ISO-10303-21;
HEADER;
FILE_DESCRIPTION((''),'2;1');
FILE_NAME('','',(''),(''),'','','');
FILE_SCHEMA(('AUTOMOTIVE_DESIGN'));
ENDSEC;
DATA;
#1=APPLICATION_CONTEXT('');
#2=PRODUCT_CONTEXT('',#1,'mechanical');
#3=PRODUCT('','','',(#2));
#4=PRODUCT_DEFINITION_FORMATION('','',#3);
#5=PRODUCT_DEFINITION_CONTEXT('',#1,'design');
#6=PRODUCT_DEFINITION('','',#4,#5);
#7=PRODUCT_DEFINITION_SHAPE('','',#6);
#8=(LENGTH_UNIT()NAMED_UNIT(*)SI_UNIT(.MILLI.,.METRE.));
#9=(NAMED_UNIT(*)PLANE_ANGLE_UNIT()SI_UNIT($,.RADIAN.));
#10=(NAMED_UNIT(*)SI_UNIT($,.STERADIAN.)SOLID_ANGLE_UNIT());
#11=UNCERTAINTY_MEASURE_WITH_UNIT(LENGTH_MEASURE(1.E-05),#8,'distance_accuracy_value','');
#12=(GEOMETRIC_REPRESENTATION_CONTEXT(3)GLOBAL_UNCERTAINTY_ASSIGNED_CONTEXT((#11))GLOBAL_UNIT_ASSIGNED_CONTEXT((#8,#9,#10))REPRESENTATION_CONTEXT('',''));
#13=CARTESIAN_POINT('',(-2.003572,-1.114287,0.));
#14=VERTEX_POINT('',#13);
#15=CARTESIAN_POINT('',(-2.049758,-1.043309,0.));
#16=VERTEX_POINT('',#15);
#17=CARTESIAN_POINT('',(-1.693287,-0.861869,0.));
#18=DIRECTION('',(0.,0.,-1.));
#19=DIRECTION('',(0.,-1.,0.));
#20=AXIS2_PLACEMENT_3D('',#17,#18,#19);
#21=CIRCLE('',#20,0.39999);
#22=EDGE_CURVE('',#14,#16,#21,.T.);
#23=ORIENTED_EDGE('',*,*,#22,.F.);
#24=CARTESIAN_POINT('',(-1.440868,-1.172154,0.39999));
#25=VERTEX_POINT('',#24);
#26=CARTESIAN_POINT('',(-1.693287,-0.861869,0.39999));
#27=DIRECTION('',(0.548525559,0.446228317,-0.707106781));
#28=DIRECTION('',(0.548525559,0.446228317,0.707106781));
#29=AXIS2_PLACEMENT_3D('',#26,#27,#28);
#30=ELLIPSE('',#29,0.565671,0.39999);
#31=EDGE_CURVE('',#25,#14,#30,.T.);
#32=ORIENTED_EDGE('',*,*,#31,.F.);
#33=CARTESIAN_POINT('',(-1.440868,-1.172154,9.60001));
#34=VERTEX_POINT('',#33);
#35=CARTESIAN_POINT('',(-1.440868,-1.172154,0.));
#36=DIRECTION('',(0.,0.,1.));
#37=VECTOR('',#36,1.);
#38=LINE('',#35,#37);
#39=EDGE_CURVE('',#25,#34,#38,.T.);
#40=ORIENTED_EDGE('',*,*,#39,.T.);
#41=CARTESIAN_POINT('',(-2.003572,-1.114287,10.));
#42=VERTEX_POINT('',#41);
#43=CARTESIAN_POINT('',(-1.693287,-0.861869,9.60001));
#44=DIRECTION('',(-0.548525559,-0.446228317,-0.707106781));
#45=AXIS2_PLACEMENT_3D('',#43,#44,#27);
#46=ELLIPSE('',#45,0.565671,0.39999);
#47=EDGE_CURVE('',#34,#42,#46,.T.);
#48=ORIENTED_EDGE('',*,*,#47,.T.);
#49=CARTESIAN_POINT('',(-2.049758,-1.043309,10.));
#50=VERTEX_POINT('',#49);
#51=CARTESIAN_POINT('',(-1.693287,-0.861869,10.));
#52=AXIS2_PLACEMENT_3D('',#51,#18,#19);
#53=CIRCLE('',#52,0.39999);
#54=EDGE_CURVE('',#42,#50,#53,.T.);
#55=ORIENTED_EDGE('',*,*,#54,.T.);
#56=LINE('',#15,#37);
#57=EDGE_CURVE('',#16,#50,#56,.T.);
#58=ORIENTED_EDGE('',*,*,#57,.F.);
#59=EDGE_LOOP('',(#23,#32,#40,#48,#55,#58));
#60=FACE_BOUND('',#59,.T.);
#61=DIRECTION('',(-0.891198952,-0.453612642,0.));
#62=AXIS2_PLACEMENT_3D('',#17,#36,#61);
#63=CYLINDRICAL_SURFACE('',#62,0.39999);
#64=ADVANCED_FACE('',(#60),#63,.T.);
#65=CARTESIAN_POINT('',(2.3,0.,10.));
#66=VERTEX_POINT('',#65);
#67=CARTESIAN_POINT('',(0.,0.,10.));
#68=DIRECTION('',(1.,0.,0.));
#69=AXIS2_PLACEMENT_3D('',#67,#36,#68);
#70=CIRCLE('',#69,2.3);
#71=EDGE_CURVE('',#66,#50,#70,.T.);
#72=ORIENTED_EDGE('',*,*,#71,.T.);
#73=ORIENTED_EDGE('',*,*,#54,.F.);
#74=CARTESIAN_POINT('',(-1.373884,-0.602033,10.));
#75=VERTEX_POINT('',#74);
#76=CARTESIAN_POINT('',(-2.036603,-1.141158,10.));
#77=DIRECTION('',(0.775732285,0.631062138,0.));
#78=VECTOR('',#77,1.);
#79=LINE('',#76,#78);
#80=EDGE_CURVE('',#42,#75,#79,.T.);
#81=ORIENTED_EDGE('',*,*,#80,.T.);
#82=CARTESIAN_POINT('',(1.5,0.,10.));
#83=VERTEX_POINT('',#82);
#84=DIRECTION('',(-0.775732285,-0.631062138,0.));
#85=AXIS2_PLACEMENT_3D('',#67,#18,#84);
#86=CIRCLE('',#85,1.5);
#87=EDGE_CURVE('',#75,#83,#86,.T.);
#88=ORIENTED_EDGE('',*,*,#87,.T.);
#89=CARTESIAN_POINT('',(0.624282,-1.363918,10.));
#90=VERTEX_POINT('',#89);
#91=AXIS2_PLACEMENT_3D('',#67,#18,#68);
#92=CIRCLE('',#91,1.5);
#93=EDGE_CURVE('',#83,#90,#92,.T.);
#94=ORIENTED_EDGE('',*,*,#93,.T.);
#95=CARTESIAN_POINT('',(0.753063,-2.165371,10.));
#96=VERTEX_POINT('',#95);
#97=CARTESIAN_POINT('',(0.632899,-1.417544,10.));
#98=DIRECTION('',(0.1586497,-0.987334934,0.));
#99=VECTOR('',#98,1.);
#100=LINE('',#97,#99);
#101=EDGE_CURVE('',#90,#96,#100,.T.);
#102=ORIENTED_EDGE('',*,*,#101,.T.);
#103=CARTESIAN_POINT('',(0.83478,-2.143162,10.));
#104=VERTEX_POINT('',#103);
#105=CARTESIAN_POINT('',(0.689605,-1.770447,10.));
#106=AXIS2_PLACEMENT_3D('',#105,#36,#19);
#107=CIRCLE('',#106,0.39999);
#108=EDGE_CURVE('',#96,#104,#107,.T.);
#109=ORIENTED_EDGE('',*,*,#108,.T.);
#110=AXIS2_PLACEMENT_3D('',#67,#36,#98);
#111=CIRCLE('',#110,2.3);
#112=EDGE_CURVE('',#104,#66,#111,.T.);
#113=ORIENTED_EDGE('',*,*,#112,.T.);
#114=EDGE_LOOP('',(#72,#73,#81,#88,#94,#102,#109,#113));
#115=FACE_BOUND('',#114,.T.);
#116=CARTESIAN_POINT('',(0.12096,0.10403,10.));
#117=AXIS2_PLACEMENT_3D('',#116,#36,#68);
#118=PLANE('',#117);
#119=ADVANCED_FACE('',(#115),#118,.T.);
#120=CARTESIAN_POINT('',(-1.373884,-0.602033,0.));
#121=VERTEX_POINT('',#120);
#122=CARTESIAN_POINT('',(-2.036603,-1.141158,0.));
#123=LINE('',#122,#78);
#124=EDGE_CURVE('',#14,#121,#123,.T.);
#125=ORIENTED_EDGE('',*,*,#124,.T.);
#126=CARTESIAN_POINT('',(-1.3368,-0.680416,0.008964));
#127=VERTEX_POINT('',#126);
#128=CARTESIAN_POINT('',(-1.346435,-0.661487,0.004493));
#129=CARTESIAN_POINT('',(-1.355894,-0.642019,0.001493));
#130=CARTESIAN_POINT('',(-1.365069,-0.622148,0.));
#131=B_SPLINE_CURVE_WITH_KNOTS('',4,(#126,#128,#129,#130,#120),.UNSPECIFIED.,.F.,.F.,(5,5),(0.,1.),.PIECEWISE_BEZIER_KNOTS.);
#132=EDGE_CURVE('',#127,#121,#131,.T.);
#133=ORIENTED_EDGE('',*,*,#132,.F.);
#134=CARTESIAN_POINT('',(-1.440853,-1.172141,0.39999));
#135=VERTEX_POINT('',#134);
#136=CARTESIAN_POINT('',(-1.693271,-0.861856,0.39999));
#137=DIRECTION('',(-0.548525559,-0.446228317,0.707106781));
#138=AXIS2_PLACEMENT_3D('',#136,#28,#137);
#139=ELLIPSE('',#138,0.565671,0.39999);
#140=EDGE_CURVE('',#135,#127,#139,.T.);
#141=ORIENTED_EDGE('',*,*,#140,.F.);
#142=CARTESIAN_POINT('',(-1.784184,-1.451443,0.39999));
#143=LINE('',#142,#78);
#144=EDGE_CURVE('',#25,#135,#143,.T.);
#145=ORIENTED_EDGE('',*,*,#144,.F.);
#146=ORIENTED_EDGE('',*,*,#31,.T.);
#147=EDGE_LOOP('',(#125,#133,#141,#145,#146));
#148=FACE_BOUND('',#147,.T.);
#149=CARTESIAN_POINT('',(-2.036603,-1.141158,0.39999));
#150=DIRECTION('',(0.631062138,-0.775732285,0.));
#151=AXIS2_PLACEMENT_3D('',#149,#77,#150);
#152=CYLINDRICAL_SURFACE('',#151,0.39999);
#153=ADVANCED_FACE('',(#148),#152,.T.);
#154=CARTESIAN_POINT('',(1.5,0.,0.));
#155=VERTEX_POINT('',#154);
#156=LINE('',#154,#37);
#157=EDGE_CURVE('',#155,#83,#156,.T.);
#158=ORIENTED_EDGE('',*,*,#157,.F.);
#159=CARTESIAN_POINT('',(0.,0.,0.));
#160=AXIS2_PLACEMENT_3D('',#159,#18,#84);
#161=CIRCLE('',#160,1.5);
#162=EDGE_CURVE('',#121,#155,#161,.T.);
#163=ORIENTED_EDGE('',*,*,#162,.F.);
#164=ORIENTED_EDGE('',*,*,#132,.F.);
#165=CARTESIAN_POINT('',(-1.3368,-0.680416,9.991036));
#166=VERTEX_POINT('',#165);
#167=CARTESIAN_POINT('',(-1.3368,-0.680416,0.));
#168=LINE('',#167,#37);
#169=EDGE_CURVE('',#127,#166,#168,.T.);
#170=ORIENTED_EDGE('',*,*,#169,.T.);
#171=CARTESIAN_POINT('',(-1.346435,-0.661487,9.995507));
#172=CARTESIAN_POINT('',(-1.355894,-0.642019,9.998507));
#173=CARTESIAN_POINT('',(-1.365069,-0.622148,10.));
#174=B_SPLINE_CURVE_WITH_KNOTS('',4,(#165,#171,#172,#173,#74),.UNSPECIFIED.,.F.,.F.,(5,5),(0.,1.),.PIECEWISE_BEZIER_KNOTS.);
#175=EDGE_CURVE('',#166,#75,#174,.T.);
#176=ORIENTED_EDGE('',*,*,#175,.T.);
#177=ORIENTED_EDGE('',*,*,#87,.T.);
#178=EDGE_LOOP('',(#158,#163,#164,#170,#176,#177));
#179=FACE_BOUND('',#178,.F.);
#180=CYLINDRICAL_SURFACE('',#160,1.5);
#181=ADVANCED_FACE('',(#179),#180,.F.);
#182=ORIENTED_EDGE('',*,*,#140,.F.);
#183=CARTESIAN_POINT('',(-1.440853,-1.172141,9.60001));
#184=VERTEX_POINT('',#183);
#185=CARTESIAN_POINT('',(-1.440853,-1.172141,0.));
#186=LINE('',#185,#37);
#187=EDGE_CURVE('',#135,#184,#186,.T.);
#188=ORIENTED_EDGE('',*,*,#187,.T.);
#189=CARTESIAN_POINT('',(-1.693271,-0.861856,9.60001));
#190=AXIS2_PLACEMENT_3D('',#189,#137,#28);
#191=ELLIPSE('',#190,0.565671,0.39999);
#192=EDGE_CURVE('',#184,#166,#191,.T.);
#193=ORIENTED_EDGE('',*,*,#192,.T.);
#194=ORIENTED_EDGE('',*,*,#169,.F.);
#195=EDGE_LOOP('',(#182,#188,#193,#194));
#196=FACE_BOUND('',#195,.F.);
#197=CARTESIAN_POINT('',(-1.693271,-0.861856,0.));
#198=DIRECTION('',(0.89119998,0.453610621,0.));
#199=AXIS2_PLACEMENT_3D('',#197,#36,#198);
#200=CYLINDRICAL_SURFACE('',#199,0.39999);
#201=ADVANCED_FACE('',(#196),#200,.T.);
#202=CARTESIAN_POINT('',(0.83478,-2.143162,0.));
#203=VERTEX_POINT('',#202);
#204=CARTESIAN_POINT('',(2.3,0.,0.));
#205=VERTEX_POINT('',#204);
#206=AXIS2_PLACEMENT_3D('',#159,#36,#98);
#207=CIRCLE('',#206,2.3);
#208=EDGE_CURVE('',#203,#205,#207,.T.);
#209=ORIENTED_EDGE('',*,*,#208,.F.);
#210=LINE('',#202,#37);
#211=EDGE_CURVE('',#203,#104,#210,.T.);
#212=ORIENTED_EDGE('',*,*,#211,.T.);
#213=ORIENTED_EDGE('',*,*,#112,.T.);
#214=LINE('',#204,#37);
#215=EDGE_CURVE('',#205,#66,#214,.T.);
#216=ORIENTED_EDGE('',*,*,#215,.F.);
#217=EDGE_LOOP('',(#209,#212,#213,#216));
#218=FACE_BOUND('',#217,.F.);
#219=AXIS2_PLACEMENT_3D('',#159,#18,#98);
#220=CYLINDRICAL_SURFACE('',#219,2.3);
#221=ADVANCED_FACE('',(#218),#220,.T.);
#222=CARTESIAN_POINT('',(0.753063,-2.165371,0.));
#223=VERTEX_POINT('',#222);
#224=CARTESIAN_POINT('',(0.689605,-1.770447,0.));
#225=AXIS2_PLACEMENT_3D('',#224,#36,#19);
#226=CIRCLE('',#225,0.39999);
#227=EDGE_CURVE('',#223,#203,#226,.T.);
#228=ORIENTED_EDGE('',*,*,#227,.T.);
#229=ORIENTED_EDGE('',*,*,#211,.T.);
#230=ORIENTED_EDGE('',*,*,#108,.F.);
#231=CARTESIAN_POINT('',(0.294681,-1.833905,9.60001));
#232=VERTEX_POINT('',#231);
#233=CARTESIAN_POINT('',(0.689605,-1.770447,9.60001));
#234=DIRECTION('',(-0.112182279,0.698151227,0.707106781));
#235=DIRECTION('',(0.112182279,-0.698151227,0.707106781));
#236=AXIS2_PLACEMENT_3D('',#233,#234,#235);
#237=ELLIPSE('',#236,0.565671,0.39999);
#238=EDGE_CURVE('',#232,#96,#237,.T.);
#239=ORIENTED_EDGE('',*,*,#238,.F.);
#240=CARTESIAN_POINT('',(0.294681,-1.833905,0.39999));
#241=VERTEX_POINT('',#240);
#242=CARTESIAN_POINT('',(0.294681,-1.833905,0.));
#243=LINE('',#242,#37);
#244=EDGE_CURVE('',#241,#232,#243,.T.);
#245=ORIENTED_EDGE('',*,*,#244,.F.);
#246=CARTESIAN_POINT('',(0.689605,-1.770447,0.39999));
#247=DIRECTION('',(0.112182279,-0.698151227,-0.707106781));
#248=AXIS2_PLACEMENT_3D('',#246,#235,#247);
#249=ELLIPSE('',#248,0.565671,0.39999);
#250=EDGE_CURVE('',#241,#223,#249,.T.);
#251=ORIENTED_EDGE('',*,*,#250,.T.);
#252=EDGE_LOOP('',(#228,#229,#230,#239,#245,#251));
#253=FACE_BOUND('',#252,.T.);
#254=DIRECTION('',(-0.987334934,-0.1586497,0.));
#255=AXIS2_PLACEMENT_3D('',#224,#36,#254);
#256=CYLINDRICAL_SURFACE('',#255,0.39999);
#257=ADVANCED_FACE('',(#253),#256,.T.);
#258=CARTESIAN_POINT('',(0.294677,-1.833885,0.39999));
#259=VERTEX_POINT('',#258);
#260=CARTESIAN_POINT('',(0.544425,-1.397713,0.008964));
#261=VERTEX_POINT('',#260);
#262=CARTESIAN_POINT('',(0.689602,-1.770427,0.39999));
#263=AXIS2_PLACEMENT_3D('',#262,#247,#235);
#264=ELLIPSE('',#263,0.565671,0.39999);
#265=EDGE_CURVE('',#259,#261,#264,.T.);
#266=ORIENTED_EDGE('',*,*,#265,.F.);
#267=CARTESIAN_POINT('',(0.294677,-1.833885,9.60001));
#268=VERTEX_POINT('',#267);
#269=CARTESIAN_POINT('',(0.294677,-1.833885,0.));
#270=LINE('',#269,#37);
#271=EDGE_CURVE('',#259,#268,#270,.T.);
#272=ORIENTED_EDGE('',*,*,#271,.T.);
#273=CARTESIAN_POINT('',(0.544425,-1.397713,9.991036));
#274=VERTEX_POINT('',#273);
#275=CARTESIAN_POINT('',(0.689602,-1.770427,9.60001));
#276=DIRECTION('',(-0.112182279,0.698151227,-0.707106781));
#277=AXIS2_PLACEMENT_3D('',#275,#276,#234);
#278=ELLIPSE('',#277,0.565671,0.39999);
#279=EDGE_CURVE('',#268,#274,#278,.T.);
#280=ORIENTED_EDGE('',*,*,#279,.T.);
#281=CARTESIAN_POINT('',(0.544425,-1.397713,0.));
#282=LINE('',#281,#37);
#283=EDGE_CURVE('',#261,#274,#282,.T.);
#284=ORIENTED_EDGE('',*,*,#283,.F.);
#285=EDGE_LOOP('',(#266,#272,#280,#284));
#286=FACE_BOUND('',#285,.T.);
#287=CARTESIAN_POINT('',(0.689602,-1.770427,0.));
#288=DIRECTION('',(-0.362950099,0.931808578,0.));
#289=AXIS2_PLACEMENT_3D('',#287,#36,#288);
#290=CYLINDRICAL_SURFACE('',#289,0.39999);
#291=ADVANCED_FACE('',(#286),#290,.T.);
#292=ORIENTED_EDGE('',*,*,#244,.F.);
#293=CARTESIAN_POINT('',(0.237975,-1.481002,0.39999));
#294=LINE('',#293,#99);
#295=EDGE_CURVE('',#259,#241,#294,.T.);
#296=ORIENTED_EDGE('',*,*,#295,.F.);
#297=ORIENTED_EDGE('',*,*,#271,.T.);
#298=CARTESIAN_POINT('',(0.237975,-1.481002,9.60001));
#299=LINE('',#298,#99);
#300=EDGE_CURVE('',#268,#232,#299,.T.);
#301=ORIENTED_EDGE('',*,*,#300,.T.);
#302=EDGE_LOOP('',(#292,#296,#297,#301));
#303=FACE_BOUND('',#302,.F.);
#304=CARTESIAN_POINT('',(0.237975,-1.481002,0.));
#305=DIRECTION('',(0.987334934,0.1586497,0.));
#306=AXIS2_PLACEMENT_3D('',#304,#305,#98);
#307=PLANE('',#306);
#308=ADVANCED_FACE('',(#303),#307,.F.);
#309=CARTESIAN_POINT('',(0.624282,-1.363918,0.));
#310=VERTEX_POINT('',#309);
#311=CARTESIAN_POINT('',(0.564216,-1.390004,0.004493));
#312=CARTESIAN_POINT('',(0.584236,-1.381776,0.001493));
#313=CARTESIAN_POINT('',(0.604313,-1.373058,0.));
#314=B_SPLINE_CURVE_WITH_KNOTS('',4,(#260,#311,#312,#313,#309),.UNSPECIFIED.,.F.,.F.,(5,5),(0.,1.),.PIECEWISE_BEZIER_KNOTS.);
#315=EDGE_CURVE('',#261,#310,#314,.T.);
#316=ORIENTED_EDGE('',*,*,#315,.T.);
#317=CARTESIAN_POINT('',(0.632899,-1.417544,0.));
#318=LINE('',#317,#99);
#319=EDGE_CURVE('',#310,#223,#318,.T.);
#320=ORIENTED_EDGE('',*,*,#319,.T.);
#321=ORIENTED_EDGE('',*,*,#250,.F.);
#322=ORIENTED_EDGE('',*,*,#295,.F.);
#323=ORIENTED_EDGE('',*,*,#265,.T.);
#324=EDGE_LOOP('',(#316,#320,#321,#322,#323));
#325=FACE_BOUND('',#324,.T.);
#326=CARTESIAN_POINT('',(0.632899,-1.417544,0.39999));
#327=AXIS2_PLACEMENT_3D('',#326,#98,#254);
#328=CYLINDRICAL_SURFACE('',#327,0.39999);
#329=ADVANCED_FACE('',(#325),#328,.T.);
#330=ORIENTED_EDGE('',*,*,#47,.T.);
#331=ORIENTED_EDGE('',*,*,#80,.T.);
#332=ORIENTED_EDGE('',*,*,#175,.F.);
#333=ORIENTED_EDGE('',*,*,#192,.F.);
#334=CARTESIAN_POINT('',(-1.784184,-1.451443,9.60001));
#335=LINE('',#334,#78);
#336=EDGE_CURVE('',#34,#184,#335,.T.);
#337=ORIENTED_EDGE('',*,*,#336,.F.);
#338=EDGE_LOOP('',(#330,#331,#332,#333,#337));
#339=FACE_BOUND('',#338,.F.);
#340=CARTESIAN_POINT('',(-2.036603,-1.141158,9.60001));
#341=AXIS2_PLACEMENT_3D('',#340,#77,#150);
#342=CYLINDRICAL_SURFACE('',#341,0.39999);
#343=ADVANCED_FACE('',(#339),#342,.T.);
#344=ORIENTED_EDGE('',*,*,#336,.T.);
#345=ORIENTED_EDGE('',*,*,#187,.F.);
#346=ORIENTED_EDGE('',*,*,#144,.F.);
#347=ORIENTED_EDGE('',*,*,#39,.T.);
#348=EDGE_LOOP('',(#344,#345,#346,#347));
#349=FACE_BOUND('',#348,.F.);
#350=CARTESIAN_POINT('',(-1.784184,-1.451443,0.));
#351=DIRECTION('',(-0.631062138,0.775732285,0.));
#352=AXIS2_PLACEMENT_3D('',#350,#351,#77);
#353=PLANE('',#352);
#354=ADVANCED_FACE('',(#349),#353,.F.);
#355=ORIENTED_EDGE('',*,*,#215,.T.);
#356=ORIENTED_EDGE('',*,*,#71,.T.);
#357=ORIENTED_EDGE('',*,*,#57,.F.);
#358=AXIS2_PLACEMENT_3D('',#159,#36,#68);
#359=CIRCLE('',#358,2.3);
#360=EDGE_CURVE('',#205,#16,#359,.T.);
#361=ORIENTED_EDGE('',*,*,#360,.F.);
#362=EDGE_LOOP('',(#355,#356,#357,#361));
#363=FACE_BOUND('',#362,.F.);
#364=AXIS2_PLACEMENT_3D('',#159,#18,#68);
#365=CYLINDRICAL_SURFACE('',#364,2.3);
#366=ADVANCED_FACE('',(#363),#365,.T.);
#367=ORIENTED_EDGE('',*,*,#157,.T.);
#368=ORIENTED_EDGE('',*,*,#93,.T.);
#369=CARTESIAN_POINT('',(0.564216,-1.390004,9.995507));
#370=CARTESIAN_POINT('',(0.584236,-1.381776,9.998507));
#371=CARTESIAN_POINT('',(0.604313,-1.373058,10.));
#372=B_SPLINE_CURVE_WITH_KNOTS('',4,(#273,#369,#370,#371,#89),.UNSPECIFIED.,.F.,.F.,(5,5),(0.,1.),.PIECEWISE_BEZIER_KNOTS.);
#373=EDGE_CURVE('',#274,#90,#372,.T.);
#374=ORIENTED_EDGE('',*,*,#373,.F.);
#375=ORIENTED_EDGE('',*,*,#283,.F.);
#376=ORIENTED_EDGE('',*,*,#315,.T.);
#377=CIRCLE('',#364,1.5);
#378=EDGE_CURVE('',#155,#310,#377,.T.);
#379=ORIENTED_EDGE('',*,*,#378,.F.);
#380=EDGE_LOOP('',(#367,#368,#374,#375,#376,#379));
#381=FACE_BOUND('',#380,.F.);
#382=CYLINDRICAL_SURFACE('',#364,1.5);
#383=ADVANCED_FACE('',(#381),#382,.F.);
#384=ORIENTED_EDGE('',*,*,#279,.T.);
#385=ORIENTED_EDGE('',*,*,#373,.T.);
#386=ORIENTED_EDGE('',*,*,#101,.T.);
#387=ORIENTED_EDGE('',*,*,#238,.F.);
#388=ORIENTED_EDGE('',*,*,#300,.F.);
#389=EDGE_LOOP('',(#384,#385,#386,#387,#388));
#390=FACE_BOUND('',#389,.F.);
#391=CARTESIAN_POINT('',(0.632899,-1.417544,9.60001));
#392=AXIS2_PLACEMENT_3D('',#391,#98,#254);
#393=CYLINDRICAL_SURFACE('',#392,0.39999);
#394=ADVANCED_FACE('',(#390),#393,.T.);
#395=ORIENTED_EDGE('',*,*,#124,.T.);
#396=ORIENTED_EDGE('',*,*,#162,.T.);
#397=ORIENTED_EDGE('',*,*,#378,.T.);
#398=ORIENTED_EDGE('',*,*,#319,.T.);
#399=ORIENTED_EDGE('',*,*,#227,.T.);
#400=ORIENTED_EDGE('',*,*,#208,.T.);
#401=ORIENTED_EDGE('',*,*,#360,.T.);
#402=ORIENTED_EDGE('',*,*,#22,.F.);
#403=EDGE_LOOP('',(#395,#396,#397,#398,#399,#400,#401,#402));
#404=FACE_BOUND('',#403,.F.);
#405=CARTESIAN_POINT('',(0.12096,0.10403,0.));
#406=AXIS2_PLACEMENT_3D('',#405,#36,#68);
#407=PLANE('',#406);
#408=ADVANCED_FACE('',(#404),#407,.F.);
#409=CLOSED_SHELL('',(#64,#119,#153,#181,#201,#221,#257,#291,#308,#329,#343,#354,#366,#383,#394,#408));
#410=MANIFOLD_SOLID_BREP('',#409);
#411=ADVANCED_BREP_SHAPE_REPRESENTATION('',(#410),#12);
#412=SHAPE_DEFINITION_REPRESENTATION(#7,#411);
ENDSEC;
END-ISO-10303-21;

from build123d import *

# Parameters (mm, degrees)
F1_DEPTH = 10
F2_R     = 0.39999


# Not quite as in the source:
# - a fillet or chamfer is up to 0.001 mm smaller than in the source, because OpenCascade refuses the exact size


with BuildPart() as f1:
    # F0 (on Top) → F1 (new body)
    with BuildSketch(Plane.XY):
        with BuildLine():
            ThreePointArc((-1.1635984277, -0.9465932067), (-0.502295908, 1.4133997385), (1.5, 0))
            ThreePointArc((1.5, 0), (1.1417008858, -0.9728921252), (0.2379745502, -1.4810024016))
            Line((0.2379745502, -1.4810024016), (0.3648943103, -2.2708703491))
            ThreePointArc((0.3648943103, -2.2708703491), (1.7506080249, -1.4917679254), (2.3, 0))
            ThreePointArc((2.3, 0), (-0.7701870589, 2.1672129324), (-1.7841842559, -1.4514429169))
            Line((-1.7841842559, -1.4514429169), (-1.1635984277, -0.9465932067))
        make_face()
    extrude(amount=F1_DEPTH)

    # F2 (radius 0.4 in the source; OpenCascade refuses exactly that, so slightly less here)
    f2_edges = [f1.edges().sort_by_distance(p)[0] for p in [
        (-1.784184, -1.451443, 5),
        (-1.163598, -0.946593, 5),
        (-1.473891, -1.199018, 0),
        (-1.473891, -1.199018, 10),
        (0.237975, -1.481002, 5),
        (0.364894, -2.27087, 5),
        (0.301434, -1.875936, 0),
        (0.301434, -1.875936, 10),
    ]]
    fillet(f2_edges, radius=F2_R)


solid = f1.part
